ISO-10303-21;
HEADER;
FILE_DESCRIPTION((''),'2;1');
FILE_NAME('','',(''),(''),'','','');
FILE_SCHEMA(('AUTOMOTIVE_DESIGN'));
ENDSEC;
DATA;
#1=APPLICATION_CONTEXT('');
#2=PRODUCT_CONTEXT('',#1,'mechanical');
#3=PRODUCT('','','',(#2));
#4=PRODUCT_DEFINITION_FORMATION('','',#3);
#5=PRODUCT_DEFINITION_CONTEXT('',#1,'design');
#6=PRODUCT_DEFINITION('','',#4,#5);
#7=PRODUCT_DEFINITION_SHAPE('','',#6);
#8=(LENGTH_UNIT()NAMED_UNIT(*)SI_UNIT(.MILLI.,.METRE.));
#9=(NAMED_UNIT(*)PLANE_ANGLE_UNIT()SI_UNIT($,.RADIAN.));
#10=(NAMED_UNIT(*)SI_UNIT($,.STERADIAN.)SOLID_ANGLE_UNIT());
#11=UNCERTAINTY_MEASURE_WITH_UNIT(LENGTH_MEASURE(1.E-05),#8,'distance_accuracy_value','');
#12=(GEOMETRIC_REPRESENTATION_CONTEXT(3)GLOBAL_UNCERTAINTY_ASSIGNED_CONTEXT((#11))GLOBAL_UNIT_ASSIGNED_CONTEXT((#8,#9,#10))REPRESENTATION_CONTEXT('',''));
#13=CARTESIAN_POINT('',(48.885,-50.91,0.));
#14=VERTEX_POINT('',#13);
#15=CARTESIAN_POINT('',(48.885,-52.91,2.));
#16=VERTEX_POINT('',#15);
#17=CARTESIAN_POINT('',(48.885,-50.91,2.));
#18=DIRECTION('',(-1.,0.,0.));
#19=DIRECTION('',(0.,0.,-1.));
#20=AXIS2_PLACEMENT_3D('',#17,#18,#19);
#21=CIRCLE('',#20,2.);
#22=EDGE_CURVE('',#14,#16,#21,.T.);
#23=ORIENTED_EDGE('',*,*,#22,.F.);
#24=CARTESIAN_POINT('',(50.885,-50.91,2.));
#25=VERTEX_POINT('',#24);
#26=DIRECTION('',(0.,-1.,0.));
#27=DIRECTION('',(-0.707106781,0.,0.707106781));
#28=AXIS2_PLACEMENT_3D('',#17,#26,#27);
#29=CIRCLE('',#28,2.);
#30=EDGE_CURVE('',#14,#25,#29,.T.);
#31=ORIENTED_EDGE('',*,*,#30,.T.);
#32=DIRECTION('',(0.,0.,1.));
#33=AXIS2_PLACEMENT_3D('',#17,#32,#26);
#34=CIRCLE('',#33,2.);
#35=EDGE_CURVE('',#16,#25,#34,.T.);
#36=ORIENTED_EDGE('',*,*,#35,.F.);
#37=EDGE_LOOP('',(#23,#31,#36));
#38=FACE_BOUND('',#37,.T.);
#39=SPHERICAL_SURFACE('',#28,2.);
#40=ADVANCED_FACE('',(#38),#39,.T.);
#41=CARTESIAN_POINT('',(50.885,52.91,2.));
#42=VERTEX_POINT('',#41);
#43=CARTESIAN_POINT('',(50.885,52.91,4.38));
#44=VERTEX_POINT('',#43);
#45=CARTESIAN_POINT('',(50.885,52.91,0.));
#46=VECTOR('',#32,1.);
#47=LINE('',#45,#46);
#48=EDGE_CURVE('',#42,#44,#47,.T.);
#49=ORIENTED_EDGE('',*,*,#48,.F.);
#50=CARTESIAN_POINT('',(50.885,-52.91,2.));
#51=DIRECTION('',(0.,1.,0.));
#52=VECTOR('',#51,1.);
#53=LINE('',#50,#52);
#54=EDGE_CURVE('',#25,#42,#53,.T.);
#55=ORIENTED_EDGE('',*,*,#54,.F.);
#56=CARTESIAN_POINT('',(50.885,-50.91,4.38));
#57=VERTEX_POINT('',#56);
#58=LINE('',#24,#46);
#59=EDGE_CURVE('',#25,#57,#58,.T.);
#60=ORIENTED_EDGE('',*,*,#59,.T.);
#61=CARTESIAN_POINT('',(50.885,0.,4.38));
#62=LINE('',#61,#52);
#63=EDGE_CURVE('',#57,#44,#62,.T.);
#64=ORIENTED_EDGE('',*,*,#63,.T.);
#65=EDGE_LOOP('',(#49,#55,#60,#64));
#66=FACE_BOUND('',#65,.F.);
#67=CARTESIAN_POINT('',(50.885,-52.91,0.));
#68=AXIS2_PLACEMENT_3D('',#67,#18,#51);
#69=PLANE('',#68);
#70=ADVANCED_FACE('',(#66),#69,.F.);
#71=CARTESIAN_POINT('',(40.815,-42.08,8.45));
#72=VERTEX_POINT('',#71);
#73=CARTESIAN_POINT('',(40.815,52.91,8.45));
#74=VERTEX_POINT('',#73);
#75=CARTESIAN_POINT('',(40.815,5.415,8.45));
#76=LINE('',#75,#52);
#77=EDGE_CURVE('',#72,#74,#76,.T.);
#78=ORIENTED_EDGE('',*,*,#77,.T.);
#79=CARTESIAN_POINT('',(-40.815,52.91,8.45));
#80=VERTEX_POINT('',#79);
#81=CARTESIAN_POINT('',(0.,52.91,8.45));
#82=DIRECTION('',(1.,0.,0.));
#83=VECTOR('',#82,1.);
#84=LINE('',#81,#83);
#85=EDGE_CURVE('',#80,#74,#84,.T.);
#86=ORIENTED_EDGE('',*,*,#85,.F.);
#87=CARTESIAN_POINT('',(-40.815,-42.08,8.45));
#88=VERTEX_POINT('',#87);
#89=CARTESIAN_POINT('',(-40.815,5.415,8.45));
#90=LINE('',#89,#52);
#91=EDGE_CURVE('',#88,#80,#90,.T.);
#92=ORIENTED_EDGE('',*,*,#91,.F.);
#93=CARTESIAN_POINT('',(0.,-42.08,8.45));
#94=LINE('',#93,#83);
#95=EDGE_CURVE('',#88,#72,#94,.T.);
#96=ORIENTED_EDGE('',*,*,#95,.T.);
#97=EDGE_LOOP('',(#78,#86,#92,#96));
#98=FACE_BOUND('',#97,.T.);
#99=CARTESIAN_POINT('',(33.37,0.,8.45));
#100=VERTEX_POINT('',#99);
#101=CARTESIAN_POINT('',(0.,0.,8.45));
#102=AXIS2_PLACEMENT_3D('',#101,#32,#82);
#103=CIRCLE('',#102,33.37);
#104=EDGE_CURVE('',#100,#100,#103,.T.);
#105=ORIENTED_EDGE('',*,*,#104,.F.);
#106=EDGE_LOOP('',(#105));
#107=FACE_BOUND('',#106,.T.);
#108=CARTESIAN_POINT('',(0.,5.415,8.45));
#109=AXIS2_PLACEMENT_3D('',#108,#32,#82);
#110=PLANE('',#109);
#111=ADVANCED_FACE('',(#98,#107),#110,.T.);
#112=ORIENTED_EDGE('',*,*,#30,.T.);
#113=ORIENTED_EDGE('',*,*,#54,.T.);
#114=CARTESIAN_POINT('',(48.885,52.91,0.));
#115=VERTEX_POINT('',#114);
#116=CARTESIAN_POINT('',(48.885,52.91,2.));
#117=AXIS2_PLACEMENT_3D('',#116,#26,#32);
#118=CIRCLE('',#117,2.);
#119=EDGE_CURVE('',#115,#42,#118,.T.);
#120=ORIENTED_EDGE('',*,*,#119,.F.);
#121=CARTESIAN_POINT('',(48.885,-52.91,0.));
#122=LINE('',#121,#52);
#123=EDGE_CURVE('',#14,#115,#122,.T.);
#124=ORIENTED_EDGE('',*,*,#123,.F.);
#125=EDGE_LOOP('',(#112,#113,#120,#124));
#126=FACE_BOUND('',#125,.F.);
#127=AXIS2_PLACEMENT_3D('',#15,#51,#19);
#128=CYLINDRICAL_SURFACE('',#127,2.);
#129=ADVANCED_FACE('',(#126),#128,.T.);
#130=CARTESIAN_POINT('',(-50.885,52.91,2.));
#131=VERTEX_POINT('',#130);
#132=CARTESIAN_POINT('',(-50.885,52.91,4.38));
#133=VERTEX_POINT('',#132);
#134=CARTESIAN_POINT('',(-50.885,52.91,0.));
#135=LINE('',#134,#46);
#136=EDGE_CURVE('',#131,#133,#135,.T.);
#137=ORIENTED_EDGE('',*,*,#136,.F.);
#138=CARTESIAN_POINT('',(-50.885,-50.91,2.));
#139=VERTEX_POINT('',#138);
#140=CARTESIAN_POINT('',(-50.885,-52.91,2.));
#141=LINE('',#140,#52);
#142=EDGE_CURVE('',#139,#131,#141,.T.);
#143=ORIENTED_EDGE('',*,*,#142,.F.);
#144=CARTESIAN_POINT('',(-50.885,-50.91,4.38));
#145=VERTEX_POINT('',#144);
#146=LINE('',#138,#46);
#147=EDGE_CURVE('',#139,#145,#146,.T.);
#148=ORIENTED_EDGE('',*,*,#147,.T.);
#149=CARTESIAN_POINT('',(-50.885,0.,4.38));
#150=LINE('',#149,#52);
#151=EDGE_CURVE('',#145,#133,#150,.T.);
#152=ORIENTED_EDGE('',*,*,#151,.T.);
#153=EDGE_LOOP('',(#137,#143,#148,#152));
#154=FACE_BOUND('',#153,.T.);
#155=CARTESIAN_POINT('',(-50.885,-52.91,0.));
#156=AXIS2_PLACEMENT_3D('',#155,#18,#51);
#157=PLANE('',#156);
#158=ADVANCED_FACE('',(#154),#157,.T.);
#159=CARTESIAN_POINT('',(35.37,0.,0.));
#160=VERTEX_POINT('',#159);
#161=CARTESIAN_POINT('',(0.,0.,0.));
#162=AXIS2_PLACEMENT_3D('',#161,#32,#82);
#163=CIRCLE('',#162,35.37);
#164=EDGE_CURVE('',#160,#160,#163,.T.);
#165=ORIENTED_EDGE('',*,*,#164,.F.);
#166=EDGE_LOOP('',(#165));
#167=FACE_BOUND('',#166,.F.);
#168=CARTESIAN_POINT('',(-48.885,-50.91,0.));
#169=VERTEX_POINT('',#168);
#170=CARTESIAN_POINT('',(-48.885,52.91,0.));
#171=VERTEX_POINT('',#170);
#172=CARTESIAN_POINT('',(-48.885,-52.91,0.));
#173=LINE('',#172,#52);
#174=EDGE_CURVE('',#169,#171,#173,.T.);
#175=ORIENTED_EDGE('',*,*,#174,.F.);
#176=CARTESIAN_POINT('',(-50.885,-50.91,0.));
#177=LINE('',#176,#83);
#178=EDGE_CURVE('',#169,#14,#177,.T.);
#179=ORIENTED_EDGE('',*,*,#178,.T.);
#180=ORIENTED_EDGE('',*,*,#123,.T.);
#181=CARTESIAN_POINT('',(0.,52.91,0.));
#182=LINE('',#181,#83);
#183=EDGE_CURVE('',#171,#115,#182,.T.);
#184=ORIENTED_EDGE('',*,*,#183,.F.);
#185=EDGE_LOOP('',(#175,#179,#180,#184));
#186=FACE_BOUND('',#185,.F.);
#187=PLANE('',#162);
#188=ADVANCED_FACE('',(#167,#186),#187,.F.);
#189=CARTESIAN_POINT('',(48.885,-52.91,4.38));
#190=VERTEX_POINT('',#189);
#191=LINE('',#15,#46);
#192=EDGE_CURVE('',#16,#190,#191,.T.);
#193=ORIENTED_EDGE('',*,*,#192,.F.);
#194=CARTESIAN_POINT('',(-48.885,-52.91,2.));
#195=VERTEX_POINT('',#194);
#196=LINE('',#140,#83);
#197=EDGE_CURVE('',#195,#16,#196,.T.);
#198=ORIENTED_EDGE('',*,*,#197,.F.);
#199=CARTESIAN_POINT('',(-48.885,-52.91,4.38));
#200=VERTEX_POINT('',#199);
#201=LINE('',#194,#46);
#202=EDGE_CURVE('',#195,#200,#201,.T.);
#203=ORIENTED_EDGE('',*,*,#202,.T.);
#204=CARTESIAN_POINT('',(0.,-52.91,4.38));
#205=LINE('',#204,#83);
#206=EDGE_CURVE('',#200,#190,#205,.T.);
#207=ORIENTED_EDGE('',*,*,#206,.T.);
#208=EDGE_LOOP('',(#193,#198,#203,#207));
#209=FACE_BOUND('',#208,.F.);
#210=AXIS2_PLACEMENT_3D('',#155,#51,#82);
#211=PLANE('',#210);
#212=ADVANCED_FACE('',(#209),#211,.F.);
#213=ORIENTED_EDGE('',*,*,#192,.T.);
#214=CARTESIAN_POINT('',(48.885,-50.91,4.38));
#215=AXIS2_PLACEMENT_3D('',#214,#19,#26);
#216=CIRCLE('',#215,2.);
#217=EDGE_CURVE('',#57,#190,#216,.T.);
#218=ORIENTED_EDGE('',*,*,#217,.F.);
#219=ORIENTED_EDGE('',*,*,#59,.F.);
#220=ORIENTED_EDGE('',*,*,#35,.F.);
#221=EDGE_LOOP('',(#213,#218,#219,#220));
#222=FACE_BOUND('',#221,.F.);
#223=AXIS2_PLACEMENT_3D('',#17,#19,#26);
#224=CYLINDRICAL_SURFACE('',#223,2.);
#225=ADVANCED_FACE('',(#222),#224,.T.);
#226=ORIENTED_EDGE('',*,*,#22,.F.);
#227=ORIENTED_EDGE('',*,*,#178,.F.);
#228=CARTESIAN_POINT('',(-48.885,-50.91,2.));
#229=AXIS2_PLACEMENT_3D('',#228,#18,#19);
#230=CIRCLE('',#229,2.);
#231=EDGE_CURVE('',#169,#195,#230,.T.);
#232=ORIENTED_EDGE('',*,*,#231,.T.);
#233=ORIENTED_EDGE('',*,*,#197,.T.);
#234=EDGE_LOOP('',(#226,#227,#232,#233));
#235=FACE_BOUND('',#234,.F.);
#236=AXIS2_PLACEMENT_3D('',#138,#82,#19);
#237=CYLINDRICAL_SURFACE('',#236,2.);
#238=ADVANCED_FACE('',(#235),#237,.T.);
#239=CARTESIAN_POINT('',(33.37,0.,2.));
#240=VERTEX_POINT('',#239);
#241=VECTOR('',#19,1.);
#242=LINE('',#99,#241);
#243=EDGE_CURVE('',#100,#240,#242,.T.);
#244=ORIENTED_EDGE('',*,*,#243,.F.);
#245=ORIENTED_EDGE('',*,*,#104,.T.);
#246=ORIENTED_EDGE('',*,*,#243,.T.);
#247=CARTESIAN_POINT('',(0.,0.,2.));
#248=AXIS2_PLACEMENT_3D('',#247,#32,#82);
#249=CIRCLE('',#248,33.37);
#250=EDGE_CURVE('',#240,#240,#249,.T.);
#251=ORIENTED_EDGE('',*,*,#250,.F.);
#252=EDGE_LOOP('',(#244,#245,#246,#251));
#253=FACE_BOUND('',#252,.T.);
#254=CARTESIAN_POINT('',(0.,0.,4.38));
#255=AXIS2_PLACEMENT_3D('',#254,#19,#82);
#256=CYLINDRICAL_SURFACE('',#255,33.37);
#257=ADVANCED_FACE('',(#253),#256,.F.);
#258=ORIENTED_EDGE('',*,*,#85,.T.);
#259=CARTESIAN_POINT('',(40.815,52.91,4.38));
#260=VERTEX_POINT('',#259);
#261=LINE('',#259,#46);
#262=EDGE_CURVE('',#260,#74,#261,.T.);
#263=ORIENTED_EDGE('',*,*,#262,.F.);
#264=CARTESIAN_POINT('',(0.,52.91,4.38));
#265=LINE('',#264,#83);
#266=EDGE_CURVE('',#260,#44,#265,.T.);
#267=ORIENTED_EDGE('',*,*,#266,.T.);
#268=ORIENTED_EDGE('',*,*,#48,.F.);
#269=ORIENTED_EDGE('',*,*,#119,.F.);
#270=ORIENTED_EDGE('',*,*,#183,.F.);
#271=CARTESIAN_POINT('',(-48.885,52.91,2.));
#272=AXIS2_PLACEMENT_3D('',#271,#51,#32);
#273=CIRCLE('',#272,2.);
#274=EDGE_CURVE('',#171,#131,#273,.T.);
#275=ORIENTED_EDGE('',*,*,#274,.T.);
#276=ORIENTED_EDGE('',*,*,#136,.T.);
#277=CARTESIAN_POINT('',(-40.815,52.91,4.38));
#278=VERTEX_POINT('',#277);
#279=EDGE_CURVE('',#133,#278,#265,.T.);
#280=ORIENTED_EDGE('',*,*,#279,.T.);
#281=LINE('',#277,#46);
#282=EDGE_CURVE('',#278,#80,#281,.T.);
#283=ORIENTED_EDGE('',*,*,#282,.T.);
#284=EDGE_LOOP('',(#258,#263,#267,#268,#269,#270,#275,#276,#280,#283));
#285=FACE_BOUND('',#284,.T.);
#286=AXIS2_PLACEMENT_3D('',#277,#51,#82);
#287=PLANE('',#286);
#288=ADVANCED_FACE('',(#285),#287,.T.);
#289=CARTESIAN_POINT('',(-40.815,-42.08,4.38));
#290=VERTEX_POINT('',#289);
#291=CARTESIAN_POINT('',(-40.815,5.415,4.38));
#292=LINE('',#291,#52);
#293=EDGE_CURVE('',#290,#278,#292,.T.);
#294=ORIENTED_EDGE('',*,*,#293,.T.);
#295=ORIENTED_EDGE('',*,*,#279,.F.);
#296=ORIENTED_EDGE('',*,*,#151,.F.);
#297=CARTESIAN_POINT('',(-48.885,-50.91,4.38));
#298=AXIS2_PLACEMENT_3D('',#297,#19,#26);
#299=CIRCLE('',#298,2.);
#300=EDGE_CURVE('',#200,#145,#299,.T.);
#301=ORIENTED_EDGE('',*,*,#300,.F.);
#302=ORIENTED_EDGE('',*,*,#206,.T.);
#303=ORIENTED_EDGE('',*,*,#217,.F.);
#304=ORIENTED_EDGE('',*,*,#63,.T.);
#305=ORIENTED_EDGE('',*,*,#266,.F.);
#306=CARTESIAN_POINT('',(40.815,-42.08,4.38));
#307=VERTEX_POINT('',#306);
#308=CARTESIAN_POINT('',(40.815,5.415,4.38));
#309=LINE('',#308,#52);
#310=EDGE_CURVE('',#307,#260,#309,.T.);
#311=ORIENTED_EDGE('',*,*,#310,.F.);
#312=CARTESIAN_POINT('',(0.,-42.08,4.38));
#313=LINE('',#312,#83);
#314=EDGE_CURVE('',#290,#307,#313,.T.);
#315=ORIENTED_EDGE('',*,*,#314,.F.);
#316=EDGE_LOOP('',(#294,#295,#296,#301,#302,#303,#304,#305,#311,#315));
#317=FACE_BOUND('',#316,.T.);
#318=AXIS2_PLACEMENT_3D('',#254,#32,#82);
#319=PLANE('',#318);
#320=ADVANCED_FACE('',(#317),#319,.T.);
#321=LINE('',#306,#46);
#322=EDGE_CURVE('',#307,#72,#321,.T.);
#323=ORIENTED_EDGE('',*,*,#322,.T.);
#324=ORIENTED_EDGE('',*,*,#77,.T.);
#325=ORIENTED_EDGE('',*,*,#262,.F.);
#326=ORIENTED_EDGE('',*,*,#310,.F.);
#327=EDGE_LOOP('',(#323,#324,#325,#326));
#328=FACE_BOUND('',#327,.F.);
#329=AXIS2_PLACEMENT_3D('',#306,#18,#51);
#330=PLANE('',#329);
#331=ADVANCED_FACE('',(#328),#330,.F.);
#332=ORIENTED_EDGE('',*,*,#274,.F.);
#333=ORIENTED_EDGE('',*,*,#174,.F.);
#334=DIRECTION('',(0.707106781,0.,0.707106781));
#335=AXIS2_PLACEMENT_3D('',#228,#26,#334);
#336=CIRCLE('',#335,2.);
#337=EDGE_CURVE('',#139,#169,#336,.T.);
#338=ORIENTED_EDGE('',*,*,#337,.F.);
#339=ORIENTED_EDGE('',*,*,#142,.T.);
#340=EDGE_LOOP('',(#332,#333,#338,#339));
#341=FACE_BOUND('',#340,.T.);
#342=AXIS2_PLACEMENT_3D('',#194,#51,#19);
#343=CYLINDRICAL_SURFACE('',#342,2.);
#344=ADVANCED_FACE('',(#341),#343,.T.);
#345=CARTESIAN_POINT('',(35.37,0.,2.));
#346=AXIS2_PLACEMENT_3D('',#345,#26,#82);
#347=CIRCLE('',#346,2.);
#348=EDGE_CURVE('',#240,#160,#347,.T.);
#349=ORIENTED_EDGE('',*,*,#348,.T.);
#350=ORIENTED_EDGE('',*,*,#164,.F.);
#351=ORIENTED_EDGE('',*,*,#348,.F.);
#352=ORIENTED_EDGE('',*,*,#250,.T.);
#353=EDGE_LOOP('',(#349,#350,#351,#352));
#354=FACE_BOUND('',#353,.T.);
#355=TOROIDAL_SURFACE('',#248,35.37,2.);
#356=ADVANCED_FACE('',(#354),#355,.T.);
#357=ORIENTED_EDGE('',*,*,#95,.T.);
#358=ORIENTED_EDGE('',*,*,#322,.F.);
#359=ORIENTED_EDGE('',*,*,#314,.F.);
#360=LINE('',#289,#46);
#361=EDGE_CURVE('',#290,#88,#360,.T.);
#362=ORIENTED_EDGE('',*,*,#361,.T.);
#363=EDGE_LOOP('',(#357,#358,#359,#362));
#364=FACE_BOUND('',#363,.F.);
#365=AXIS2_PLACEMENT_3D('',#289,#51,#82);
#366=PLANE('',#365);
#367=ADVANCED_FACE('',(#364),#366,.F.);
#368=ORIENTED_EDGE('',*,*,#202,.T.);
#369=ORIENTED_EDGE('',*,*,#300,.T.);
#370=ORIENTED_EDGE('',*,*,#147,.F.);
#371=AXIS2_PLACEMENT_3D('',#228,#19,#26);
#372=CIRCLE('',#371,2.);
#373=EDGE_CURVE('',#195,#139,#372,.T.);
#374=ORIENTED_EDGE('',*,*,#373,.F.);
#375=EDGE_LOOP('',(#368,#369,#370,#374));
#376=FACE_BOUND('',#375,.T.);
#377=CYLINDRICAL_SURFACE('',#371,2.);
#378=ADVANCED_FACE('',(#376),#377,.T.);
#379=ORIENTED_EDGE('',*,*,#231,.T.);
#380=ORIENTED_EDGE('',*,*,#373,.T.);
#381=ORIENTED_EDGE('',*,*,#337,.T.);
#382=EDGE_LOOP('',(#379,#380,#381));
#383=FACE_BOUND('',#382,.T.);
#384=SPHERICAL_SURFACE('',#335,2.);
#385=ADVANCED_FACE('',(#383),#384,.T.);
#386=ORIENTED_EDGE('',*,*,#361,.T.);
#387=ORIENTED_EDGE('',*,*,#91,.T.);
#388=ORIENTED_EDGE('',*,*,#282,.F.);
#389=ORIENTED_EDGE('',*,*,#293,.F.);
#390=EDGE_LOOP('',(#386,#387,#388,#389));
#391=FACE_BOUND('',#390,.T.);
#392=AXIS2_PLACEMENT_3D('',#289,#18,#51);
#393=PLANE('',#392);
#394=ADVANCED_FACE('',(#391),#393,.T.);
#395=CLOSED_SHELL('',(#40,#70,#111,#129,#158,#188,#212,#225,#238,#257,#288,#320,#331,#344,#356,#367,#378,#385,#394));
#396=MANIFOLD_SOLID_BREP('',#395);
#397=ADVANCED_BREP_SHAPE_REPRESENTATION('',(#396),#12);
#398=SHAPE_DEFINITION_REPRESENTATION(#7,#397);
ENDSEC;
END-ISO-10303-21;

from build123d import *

# Parameters (mm, degrees)
F0_W         = 101.77
F0_H         = 105.82
F0_R         = 33.37
F1_DEPTH     = 4.38
F2_W         = 81.63
F2_H         = 94.99
F2_R         = 33.37
F3_DEPTH     = 4.07
F4_R         = 2
F5_T1_DEPTH  = 7.38
F5_S5_W      = 2
F5_S5_H      = 2
F5_T6_DEPTH  = 2
F5_S11_W     = 2
F5_S11_H     = 2
F5_T12_DEPTH = 2


# Not quite as in the source:
# - a fillet or chamfer that OpenCascade refuses, or shapes differently, is made with other operations: its cross-section is extruded or revolved along the edge and cut away or added


with BuildPart() as f1:
    # F0 (on Top) → F1 (new body)
    with BuildSketch(Plane.XY):
        Rectangle(F0_W, F0_H)
        Circle(F0_R, mode=Mode.SUBTRACT)
    extrude(amount=F1_DEPTH)

    # F2 (on face) → F3 (join)
    with BuildSketch(Plane.XY.offset(4.38)):
        with Locations((0, 5.415)):
            Rectangle(F2_W, F2_H)
        Circle(F2_R, mode=Mode.SUBTRACT)
    extrude(amount=F3_DEPTH)

    # F4
    f4_edges = [f1.edges().sort_by_distance(p)[0] for p in [
        (-33.37, 0, 0),
        (-50.885, 0, 0),
        (0, -52.91, 0),
        (50.885, 0, 0),
    ]]
    fillet(f4_edges, radius=F4_R)

    # F5: fillet of radius 2 on 2 edges, made by hand

    # F5_s2 → F5_t1 (cut)
    with BuildSketch(Plane.XY.offset(2)):
        with BuildLine():
            ThreePointArc((48.885, -52.91), (50.2992135624, -52.3242135624), (50.885, -50.91))
            Line((50.885, -50.91), (50.885, -52.91))
            Line((50.885, -52.91), (48.885, -52.91))
        make_face()
        with BuildLine():
            ThreePointArc((-48.885, -52.91), (-50.2992135624, -52.3242135624), (-50.885, -50.91))
            Line((-50.885, -50.91), (-50.885, -52.91))
            Line((-50.885, -52.91), (-48.885, -52.91))
        make_face()
    extrude(amount=F5_T1_DEPTH, mode=Mode.SUBTRACT)


with BuildPart() as f5_tool4:
    # F5_s5 → F5_t6 (new body)
    with BuildSketch(Plane.XZ.offset(50.91)):
        with Locations((-49.885, 1)):
            Rectangle(F5_S5_W, F5_S5_H)
    extrude(amount=F5_T6_DEPTH)

    # F5_s7 → F5_t8 (revolve, cut)
    with BuildSketch(Plane(origin=(-48.885, -50.91, 2), x_dir=(0.7071067812, 0, 0.7071067812), z_dir=(0.7071067812, 0, -0.7071067812))):
        with BuildLine():
            ThreePointArc((0, -2), (2, 0), (0, 2))
            Line((0, 2), (0, -2))
        make_face()
    revolve(axis=Axis((-48.885, -50.91, 2), (0, -1, 0)), mode=Mode.SUBTRACT)


with BuildPart() as f1_1:
    add(f1.part)

    # F5_t3: cut F5_tool4
    add(f5_tool4.part, mode=Mode.SUBTRACT)


with BuildPart() as f5_tool10:
    # F5_s11 → F5_t12 (new body)
    with BuildSketch(Plane.XZ.offset(50.91)):
        with Locations((49.885, 1)):
            Rectangle(F5_S11_W, F5_S11_H)
    extrude(amount=F5_T12_DEPTH)

    # F5_s13 → F5_t14 (revolve, cut)
    with BuildSketch(Plane(origin=(48.885, -50.91, 2), x_dir=(-0.7071067812, 0, 0.7071067812), z_dir=(0.7071067812, 0, 0.7071067812))):
        with BuildLine():
            ThreePointArc((0, -2), (2, 0), (0, 2))
            Line((0, 2), (0, -2))
        make_face()
    revolve(axis=Axis((48.885, -50.91, 2), (0, -1, 0)), mode=Mode.SUBTRACT)


with BuildPart() as f1_2:
    add(f1_1.part)

    # F5_t9: cut F5_tool10
    add(f5_tool10.part, mode=Mode.SUBTRACT)


solid = f1_2.part
